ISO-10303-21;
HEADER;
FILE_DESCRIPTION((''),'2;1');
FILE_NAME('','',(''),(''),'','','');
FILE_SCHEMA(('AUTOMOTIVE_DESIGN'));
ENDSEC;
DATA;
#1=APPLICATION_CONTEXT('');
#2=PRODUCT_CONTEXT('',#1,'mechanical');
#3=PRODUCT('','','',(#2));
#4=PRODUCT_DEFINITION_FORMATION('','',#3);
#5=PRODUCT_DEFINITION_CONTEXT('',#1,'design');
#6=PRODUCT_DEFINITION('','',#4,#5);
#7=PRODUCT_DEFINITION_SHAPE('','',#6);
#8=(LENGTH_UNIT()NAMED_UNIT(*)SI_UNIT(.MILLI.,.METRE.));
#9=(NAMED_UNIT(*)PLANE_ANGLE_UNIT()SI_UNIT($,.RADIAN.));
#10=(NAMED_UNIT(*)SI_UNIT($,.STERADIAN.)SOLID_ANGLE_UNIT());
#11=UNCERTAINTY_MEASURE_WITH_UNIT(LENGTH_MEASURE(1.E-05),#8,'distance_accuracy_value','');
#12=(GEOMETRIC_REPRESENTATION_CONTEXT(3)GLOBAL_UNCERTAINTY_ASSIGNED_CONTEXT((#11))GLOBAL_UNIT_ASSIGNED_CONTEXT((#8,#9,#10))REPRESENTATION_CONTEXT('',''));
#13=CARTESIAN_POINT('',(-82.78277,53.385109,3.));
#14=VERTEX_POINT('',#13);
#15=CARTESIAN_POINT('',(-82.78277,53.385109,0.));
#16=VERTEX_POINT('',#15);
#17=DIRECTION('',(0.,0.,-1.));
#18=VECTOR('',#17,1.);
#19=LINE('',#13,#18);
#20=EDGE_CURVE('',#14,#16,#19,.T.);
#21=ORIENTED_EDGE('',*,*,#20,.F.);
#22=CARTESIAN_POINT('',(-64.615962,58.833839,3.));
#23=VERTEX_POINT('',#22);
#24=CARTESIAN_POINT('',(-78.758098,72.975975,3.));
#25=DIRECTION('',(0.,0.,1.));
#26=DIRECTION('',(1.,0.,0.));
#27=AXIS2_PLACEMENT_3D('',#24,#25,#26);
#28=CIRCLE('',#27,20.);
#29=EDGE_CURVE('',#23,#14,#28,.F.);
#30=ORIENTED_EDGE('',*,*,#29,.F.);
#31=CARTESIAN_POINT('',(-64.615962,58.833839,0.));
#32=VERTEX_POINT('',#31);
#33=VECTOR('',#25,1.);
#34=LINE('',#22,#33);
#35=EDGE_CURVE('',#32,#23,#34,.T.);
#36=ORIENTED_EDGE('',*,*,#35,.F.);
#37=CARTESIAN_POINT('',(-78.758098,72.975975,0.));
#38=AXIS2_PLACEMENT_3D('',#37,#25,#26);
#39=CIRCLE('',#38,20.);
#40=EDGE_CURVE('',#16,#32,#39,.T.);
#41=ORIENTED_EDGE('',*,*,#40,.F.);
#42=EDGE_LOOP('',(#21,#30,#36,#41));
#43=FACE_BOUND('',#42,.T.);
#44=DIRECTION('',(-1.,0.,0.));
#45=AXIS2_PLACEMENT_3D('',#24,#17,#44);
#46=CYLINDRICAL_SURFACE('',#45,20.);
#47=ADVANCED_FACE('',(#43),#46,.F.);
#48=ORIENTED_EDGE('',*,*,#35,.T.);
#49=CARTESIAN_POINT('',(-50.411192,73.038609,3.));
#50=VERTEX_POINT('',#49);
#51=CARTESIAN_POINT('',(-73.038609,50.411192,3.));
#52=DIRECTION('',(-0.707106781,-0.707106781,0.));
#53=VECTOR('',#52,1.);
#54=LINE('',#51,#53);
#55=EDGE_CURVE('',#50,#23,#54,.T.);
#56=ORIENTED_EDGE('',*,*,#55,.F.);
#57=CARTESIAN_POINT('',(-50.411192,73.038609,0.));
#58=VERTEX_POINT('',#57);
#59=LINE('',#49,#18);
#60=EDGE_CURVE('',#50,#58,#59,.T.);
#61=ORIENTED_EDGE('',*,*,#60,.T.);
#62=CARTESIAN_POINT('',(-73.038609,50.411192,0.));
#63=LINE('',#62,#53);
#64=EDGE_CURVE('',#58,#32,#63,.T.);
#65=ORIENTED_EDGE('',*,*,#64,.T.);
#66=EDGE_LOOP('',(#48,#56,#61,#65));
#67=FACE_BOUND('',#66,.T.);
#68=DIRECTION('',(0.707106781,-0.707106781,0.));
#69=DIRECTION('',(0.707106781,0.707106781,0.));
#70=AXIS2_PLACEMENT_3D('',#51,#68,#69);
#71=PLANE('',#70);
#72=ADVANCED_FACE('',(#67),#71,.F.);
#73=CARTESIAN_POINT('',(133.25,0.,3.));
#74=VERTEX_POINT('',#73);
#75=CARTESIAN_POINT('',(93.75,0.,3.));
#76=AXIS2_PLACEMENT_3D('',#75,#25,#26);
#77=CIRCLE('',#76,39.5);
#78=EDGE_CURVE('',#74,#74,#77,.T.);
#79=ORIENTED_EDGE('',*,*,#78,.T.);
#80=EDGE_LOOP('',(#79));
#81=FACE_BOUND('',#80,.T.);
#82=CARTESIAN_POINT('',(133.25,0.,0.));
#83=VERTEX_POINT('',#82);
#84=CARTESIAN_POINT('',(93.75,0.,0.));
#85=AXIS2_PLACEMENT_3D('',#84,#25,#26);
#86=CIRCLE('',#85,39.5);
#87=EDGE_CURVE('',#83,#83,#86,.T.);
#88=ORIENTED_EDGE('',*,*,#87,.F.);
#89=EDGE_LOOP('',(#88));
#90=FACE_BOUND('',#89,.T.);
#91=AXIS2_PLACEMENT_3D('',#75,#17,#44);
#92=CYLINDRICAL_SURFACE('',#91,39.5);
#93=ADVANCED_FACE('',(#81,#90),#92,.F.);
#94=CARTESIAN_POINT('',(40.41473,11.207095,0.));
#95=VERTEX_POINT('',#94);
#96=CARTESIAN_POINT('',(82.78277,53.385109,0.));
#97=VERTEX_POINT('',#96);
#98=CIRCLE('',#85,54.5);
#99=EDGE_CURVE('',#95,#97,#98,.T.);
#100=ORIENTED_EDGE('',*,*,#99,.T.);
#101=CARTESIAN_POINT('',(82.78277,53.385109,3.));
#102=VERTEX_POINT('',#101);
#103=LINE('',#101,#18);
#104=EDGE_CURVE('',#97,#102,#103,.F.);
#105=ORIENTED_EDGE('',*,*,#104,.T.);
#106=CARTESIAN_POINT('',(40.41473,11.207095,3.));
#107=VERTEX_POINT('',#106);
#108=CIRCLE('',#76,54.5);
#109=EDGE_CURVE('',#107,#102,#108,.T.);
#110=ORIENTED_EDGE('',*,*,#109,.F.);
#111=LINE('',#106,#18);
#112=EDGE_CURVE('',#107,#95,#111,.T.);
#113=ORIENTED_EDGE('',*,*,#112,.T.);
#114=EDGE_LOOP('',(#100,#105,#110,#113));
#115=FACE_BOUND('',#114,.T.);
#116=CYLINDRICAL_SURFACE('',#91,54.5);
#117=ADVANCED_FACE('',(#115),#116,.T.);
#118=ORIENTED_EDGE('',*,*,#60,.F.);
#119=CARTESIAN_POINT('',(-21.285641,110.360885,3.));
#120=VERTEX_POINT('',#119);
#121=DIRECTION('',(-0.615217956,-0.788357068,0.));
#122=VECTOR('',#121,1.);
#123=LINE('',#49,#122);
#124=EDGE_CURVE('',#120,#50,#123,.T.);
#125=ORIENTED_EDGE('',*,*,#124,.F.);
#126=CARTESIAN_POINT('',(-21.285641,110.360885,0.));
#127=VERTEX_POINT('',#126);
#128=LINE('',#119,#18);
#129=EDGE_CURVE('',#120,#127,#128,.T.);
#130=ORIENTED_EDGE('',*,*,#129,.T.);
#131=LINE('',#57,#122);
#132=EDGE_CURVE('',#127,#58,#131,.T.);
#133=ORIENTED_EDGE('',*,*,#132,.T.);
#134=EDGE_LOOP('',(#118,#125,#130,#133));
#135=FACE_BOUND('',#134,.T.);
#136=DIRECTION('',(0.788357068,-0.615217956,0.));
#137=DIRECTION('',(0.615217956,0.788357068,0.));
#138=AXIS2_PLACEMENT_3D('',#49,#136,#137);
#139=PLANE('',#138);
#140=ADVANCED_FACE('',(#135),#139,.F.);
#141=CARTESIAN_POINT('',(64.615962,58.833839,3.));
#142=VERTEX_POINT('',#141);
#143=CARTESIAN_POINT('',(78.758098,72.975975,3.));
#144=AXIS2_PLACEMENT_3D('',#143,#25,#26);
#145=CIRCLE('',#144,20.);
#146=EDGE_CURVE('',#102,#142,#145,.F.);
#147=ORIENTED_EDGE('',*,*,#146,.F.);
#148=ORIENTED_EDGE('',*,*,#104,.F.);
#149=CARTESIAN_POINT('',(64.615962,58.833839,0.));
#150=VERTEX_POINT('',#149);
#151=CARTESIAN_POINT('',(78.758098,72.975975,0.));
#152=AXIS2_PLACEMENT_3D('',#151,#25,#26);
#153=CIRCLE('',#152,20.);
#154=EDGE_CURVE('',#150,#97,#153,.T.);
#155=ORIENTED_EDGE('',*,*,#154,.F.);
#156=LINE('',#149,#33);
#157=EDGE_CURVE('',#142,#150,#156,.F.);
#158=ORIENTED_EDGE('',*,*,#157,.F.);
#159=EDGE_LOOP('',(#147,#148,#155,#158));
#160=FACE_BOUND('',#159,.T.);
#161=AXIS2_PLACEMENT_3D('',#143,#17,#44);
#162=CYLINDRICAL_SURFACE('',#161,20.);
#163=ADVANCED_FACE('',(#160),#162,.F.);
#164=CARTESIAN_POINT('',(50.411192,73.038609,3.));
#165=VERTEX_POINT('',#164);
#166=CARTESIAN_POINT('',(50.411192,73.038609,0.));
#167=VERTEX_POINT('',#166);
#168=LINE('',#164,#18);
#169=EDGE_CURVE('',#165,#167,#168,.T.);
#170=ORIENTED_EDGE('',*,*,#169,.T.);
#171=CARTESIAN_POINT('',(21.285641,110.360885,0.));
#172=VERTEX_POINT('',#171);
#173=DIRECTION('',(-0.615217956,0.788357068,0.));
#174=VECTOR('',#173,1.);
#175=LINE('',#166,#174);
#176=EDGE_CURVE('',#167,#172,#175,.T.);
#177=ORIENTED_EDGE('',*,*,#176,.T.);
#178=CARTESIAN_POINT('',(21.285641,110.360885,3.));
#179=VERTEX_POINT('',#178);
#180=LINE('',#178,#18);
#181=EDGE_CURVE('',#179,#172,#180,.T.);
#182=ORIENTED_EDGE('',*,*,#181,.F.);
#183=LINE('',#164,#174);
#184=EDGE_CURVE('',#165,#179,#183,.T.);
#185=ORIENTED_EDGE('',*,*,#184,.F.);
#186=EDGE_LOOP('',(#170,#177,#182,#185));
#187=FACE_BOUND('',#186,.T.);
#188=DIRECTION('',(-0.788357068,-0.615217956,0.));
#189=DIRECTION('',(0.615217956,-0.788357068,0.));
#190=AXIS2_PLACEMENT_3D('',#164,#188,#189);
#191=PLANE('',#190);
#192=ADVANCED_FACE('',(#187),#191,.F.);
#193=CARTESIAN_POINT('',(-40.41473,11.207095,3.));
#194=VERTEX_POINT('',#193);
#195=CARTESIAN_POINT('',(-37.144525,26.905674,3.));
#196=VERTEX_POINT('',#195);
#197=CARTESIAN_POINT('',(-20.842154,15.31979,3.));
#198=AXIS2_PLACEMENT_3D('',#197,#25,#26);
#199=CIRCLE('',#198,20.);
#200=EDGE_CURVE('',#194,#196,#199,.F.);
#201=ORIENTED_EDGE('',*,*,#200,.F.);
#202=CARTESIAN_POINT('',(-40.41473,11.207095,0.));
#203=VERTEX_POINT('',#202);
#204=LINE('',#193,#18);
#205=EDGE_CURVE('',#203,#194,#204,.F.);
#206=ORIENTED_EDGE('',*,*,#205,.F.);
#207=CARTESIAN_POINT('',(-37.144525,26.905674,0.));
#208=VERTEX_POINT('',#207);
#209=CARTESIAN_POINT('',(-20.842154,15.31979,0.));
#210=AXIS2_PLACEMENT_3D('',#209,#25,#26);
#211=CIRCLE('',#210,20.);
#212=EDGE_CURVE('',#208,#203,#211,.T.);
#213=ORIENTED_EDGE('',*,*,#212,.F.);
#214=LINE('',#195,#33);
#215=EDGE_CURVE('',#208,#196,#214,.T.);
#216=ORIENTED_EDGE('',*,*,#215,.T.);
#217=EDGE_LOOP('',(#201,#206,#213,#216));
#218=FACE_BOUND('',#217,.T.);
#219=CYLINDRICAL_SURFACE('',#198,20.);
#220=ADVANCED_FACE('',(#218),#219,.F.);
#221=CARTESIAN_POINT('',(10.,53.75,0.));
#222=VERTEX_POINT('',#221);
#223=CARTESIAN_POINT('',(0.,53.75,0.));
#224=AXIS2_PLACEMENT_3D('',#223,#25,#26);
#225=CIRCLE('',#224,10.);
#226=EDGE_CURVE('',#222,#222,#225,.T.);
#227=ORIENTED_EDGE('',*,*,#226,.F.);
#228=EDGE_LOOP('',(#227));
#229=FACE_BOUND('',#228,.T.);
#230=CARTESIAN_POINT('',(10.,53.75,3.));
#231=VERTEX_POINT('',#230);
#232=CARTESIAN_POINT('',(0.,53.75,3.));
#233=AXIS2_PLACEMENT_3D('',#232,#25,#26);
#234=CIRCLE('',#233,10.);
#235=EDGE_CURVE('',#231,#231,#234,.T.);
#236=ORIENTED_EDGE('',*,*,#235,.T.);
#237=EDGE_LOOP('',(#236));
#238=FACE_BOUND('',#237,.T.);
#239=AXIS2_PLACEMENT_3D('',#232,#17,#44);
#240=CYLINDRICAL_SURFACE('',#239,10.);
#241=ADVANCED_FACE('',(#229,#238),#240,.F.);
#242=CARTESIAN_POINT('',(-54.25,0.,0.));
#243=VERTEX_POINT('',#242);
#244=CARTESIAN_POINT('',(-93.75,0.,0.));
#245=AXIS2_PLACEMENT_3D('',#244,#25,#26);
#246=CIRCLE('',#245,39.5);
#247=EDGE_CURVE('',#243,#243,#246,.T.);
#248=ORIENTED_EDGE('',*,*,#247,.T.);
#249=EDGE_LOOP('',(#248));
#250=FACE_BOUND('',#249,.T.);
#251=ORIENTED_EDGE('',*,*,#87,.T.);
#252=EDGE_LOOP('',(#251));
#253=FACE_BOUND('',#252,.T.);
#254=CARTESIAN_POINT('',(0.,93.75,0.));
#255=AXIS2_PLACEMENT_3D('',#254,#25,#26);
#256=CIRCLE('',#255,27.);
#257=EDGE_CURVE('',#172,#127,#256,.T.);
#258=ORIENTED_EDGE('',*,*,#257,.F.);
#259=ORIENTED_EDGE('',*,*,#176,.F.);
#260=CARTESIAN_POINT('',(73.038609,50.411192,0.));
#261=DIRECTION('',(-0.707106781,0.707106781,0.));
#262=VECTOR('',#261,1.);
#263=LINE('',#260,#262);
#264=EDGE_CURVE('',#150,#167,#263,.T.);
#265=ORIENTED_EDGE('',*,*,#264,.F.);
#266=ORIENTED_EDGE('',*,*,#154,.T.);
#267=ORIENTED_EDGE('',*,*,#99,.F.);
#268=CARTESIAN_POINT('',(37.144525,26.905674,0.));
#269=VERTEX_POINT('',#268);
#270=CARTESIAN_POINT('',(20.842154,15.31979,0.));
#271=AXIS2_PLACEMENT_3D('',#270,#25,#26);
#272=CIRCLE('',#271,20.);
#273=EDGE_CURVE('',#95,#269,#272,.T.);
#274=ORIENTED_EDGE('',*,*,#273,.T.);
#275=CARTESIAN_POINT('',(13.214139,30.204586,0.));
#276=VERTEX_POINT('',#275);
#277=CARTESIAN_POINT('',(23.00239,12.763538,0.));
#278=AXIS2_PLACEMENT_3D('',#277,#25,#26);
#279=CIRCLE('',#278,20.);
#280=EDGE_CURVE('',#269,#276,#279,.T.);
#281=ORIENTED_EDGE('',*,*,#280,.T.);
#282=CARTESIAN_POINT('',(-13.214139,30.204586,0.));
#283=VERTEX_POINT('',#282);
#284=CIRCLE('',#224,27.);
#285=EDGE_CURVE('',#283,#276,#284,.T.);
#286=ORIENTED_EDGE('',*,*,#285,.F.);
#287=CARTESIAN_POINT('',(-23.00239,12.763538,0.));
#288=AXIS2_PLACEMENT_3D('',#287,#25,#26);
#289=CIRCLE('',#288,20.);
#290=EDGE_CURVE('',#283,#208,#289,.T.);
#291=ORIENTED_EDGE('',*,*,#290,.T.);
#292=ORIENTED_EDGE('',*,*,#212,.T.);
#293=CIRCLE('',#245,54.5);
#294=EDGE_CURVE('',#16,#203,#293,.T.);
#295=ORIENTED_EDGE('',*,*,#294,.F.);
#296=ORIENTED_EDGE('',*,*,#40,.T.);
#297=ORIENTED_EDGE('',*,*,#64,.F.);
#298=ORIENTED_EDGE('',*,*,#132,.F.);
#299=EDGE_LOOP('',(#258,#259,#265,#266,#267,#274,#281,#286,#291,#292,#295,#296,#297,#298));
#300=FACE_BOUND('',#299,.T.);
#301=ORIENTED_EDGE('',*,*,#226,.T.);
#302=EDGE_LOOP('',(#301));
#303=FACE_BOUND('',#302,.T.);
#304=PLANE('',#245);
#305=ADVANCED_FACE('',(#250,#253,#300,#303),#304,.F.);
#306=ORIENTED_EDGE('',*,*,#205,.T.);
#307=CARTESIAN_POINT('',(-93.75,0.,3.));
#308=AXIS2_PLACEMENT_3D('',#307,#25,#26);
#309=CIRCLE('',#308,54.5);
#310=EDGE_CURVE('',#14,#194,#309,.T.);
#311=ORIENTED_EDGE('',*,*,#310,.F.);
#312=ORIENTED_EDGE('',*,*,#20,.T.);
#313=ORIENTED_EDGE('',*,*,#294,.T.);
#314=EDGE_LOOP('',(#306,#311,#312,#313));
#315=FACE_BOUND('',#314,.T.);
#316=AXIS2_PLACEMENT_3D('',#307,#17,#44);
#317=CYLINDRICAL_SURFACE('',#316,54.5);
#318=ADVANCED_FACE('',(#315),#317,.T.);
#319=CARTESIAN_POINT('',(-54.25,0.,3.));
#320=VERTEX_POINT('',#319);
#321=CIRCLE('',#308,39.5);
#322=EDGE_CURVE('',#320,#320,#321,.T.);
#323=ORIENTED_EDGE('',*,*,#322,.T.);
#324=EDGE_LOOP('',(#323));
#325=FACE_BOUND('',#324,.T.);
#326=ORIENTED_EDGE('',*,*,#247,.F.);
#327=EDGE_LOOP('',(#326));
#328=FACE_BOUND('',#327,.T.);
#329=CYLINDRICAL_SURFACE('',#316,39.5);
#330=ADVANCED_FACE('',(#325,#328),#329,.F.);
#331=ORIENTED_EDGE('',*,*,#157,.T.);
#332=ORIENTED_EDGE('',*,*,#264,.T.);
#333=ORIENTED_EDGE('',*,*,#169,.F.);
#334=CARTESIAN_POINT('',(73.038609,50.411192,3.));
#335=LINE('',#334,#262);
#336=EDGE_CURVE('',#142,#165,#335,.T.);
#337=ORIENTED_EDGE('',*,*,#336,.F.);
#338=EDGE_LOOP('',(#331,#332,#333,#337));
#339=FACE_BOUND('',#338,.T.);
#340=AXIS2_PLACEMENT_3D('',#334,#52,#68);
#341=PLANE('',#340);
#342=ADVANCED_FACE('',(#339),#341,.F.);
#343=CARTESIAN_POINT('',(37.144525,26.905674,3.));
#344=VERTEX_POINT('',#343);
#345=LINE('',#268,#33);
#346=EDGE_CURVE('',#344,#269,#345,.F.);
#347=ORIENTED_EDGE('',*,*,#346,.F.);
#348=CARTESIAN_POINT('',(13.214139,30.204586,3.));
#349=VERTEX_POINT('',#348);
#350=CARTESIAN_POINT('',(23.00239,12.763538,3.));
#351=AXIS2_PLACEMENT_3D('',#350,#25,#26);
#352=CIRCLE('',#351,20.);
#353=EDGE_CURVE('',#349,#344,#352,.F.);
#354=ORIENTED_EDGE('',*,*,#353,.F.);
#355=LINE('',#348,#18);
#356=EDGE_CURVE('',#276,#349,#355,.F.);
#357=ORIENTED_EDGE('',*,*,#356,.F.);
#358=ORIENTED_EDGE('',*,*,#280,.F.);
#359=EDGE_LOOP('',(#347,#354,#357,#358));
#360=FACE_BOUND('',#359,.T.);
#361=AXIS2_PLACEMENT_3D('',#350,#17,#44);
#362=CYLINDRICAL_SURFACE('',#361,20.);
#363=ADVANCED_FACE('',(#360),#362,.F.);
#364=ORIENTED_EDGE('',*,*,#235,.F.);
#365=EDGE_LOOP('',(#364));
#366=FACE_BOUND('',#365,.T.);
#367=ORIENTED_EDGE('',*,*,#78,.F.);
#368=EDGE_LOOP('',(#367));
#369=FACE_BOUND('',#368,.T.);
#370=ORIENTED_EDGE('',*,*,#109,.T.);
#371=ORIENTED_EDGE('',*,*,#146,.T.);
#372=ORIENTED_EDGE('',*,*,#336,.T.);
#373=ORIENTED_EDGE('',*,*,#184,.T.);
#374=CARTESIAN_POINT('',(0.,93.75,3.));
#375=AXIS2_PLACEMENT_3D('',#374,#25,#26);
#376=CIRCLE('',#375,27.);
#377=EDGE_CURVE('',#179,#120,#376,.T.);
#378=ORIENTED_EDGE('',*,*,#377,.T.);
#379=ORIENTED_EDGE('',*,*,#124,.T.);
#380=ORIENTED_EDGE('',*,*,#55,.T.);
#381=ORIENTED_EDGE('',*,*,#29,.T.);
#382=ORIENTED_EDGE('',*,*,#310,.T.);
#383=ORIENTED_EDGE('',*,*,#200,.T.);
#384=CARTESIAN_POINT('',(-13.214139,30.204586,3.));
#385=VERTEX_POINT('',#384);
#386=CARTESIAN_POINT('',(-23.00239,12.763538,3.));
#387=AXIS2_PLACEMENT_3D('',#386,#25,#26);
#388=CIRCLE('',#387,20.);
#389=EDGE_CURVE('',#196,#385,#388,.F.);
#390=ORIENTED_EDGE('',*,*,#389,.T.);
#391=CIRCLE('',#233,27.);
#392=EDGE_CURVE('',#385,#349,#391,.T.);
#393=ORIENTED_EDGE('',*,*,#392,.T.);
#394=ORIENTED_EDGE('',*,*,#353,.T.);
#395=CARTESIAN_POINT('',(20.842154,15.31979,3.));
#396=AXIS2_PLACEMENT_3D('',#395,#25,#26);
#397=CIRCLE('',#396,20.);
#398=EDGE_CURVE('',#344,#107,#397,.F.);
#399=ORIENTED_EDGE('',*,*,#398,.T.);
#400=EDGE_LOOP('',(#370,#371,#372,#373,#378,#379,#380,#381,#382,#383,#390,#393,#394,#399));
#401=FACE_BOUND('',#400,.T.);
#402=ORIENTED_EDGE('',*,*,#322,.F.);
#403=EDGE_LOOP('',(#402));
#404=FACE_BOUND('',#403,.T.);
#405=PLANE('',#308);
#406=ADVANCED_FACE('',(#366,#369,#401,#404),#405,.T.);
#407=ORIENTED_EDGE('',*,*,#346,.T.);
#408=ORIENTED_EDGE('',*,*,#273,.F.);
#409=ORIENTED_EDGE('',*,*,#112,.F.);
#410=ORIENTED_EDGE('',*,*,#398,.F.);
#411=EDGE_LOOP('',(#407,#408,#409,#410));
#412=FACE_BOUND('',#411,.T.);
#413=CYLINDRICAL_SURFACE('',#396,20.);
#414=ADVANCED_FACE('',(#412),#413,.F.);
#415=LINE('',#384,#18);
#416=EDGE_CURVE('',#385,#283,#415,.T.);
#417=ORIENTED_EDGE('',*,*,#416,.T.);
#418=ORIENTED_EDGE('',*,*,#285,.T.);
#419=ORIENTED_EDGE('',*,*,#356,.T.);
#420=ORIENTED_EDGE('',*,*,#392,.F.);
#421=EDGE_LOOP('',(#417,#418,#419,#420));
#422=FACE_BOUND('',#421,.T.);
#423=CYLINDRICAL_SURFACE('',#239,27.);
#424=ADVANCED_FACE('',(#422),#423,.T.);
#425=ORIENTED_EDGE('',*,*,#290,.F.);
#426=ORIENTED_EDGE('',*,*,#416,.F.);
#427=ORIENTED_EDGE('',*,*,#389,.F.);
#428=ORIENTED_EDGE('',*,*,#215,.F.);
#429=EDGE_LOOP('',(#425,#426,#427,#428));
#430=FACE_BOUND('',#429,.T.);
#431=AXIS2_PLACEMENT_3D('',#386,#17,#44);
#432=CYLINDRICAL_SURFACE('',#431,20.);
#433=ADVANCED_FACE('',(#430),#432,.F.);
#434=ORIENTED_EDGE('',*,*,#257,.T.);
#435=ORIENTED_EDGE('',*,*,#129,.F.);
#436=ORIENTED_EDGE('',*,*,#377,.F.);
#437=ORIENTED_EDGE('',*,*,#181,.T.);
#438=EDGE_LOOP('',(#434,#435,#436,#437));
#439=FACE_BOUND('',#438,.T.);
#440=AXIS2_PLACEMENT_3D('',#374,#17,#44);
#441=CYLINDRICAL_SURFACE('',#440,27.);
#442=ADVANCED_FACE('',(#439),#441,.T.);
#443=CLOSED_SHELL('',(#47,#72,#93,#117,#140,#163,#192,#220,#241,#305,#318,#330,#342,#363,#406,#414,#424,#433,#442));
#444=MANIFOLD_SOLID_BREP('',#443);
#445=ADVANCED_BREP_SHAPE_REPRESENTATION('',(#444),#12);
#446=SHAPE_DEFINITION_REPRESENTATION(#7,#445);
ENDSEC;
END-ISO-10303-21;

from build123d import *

# Parameters (mm, degrees)
SKETCH_1_R      = 39.5
SKETCH_1_R_2    = 10
EXTRUDE_1_DEPTH = 3
FILLET_1_R      = 20
FILLET_2_R      = 20


with BuildPart() as part:
    # Эскиз1 → Бобышка-Вытянуть1 (new body)
    with BuildSketch(Plane.XY):
        with BuildLine():
            Line((-73.038609064, 50.411192066), (-50.411192066, 73.038609064))
            Line((-50.411192066, 73.038609064), (-21.285640845, 110.360884799))
            ThreePointArc((-21.285640845, 110.360884799), (0, 120.75), (21.285640845, 110.360884799))
            Line((21.285640845, 110.360884799), (50.411192066, 73.038609064))
            Line((50.411192066, 73.038609064), (73.038609064, 50.411192066))
            ThreePointArc((73.038609064, 50.411192066), (132.287319575, -38.537319575), (43.338807934, 20.711390936))
            Line((43.338807934, 20.711390936), (23.534235961, 40.515962909))
            ThreePointArc((23.534235961, 40.515962909), (0, 26.75), (-23.534235961, 40.515962909))
            Line((-23.534235961, 40.515962909), (-43.338807934, 20.711390936))
            ThreePointArc((-43.338807934, 20.711390936), (-132.287319575, -38.537319575), (-73.038609064, 50.411192066))
        make_face()
        with Locations((-93.75, 0)):
            Circle(SKETCH_1_R, mode=Mode.SUBTRACT)
        with Locations((93.75, 0)):
            Circle(SKETCH_1_R, mode=Mode.SUBTRACT)
        with Locations((0, 53.75)):
            Circle(SKETCH_1_R_2, mode=Mode.SUBTRACT)
    extrude(amount=EXTRUDE_1_DEPTH)

    # Скругление1
    fillet_1_edges = [part.edges().sort_by_distance(p)[0] for p in [
        (23.534235961, 40.515962909, 1.5),
        (-23.534235961, 40.515962909, 1.5),
    ]]
    fillet(fillet_1_edges, radius=FILLET_1_R)

    # Скругление2
    # the kernel refuses this fillet: 20 mm, written as the material it adds along each edge
    with BuildSketch(Plane(origin=(73.038609064, 50.411192066, 0), x_dir=(0.9564465824657693, 0.29190740807583243, 0), z_dir=(0, 0, 1))) as fillet_2_piece_1:
        with BuildLine():
            CenterArc((12.057212621, 19.912448006), FILLET_2_R, 208.027815678, 56.6091051)
            Line((-5.59717882, 10.514444874), (-5.950266649, 10.326484811))
            Line((-5.950266649, 10.326484811), (-0.353087829, -0.187960063))
            Line((-0.353087829, -0.187960063), (0.037386706, -0.39824896))
            ThreePointArc((0.037386706, -0.39824896), (5.093938665, -0.161420815), (10.150490625, -0.39824896))
            Line((10.150490625, -0.39824896), (10.187877331, 0))
        make_face()
    extrude(amount=3)
    with BuildSketch(Plane(origin=(-73.038609064, 50.411192066, 0), x_dir=(-0.9564465824657701, 0.2919074080758299, 0), z_dir=(0, 0, 1))) as fillet_2_piece_2:
        with BuildLine():
            CenterArc((12.057212621, -19.912448006), FILLET_2_R, 95.363079222, 56.6091051)
            Line((-5.59717882, -10.514444874), (-5.950266649, -10.326484811))
            Line((-5.950266649, -10.326484811), (-0.353087829, 0.187960063))
            Line((-0.353087829, 0.187960063), (0.037386706, 0.39824896))
            ThreePointArc((0.037386706, 0.39824896), (5.093938665, 0.161420815), (10.150490625, 0.39824896))
            Line((10.150490625, 0.39824896), (10.187877331, 0))
        make_face()
    extrude(amount=3)
    with BuildSketch(Plane(origin=(43.338807934, 20.711390936, 0), x_dir=(-0.7071067811865486, 0.7071067811865466, 0), z_dir=(0, 0, 1))) as fillet_2_piece_3:
        with BuildLine():
            CenterArc((12.095099349, 19.719973869), FILLET_2_R, 213.13333953, 47.267573146)
            Line((-4.652916781, 8.788187386), (-4.987877104, 8.569551657))
            ThreePointArc((-4.987877104, 8.569551657), (-2.479115111, 4.313269402), (-0.369110171, -0.154135272))
            Line((-0.369110171, -0.154135272), (0, -0.4))
            ThreePointArc((0, -0.4), (4.380019269, -0.4), (8.693337321, -0.394399477))
            Line((8.693337321, -0.394399477), (8.760038538, 0))
        make_face()
    extrude(amount=3)
    with BuildSketch(Plane(origin=(-43.338807934, 20.711390936, 0), x_dir=(0.7071067811865474, 0.7071067811865477, 0), z_dir=(0, 0, 1))) as fillet_2_piece_4:
        with BuildLine():
            CenterArc((12.095099349, -19.719973869), FILLET_2_R, 99.599087325, 47.267573146)
            Line((-4.652916781, -8.788187386), (-4.987877104, -8.569551657))
            ThreePointArc((-4.987877104, -8.569551657), (-2.479115111, -4.313269402), (-0.369110171, 0.154135272))
            Line((-0.369110171, 0.154135272), (0, 0.4))
            ThreePointArc((0, 0.4), (4.380019269, 0.4), (8.693337321, 0.394399477))
            Line((8.693337321, 0.394399477), (8.760038538, 0))
        make_face()
    extrude(amount=3)


solid = part.part
